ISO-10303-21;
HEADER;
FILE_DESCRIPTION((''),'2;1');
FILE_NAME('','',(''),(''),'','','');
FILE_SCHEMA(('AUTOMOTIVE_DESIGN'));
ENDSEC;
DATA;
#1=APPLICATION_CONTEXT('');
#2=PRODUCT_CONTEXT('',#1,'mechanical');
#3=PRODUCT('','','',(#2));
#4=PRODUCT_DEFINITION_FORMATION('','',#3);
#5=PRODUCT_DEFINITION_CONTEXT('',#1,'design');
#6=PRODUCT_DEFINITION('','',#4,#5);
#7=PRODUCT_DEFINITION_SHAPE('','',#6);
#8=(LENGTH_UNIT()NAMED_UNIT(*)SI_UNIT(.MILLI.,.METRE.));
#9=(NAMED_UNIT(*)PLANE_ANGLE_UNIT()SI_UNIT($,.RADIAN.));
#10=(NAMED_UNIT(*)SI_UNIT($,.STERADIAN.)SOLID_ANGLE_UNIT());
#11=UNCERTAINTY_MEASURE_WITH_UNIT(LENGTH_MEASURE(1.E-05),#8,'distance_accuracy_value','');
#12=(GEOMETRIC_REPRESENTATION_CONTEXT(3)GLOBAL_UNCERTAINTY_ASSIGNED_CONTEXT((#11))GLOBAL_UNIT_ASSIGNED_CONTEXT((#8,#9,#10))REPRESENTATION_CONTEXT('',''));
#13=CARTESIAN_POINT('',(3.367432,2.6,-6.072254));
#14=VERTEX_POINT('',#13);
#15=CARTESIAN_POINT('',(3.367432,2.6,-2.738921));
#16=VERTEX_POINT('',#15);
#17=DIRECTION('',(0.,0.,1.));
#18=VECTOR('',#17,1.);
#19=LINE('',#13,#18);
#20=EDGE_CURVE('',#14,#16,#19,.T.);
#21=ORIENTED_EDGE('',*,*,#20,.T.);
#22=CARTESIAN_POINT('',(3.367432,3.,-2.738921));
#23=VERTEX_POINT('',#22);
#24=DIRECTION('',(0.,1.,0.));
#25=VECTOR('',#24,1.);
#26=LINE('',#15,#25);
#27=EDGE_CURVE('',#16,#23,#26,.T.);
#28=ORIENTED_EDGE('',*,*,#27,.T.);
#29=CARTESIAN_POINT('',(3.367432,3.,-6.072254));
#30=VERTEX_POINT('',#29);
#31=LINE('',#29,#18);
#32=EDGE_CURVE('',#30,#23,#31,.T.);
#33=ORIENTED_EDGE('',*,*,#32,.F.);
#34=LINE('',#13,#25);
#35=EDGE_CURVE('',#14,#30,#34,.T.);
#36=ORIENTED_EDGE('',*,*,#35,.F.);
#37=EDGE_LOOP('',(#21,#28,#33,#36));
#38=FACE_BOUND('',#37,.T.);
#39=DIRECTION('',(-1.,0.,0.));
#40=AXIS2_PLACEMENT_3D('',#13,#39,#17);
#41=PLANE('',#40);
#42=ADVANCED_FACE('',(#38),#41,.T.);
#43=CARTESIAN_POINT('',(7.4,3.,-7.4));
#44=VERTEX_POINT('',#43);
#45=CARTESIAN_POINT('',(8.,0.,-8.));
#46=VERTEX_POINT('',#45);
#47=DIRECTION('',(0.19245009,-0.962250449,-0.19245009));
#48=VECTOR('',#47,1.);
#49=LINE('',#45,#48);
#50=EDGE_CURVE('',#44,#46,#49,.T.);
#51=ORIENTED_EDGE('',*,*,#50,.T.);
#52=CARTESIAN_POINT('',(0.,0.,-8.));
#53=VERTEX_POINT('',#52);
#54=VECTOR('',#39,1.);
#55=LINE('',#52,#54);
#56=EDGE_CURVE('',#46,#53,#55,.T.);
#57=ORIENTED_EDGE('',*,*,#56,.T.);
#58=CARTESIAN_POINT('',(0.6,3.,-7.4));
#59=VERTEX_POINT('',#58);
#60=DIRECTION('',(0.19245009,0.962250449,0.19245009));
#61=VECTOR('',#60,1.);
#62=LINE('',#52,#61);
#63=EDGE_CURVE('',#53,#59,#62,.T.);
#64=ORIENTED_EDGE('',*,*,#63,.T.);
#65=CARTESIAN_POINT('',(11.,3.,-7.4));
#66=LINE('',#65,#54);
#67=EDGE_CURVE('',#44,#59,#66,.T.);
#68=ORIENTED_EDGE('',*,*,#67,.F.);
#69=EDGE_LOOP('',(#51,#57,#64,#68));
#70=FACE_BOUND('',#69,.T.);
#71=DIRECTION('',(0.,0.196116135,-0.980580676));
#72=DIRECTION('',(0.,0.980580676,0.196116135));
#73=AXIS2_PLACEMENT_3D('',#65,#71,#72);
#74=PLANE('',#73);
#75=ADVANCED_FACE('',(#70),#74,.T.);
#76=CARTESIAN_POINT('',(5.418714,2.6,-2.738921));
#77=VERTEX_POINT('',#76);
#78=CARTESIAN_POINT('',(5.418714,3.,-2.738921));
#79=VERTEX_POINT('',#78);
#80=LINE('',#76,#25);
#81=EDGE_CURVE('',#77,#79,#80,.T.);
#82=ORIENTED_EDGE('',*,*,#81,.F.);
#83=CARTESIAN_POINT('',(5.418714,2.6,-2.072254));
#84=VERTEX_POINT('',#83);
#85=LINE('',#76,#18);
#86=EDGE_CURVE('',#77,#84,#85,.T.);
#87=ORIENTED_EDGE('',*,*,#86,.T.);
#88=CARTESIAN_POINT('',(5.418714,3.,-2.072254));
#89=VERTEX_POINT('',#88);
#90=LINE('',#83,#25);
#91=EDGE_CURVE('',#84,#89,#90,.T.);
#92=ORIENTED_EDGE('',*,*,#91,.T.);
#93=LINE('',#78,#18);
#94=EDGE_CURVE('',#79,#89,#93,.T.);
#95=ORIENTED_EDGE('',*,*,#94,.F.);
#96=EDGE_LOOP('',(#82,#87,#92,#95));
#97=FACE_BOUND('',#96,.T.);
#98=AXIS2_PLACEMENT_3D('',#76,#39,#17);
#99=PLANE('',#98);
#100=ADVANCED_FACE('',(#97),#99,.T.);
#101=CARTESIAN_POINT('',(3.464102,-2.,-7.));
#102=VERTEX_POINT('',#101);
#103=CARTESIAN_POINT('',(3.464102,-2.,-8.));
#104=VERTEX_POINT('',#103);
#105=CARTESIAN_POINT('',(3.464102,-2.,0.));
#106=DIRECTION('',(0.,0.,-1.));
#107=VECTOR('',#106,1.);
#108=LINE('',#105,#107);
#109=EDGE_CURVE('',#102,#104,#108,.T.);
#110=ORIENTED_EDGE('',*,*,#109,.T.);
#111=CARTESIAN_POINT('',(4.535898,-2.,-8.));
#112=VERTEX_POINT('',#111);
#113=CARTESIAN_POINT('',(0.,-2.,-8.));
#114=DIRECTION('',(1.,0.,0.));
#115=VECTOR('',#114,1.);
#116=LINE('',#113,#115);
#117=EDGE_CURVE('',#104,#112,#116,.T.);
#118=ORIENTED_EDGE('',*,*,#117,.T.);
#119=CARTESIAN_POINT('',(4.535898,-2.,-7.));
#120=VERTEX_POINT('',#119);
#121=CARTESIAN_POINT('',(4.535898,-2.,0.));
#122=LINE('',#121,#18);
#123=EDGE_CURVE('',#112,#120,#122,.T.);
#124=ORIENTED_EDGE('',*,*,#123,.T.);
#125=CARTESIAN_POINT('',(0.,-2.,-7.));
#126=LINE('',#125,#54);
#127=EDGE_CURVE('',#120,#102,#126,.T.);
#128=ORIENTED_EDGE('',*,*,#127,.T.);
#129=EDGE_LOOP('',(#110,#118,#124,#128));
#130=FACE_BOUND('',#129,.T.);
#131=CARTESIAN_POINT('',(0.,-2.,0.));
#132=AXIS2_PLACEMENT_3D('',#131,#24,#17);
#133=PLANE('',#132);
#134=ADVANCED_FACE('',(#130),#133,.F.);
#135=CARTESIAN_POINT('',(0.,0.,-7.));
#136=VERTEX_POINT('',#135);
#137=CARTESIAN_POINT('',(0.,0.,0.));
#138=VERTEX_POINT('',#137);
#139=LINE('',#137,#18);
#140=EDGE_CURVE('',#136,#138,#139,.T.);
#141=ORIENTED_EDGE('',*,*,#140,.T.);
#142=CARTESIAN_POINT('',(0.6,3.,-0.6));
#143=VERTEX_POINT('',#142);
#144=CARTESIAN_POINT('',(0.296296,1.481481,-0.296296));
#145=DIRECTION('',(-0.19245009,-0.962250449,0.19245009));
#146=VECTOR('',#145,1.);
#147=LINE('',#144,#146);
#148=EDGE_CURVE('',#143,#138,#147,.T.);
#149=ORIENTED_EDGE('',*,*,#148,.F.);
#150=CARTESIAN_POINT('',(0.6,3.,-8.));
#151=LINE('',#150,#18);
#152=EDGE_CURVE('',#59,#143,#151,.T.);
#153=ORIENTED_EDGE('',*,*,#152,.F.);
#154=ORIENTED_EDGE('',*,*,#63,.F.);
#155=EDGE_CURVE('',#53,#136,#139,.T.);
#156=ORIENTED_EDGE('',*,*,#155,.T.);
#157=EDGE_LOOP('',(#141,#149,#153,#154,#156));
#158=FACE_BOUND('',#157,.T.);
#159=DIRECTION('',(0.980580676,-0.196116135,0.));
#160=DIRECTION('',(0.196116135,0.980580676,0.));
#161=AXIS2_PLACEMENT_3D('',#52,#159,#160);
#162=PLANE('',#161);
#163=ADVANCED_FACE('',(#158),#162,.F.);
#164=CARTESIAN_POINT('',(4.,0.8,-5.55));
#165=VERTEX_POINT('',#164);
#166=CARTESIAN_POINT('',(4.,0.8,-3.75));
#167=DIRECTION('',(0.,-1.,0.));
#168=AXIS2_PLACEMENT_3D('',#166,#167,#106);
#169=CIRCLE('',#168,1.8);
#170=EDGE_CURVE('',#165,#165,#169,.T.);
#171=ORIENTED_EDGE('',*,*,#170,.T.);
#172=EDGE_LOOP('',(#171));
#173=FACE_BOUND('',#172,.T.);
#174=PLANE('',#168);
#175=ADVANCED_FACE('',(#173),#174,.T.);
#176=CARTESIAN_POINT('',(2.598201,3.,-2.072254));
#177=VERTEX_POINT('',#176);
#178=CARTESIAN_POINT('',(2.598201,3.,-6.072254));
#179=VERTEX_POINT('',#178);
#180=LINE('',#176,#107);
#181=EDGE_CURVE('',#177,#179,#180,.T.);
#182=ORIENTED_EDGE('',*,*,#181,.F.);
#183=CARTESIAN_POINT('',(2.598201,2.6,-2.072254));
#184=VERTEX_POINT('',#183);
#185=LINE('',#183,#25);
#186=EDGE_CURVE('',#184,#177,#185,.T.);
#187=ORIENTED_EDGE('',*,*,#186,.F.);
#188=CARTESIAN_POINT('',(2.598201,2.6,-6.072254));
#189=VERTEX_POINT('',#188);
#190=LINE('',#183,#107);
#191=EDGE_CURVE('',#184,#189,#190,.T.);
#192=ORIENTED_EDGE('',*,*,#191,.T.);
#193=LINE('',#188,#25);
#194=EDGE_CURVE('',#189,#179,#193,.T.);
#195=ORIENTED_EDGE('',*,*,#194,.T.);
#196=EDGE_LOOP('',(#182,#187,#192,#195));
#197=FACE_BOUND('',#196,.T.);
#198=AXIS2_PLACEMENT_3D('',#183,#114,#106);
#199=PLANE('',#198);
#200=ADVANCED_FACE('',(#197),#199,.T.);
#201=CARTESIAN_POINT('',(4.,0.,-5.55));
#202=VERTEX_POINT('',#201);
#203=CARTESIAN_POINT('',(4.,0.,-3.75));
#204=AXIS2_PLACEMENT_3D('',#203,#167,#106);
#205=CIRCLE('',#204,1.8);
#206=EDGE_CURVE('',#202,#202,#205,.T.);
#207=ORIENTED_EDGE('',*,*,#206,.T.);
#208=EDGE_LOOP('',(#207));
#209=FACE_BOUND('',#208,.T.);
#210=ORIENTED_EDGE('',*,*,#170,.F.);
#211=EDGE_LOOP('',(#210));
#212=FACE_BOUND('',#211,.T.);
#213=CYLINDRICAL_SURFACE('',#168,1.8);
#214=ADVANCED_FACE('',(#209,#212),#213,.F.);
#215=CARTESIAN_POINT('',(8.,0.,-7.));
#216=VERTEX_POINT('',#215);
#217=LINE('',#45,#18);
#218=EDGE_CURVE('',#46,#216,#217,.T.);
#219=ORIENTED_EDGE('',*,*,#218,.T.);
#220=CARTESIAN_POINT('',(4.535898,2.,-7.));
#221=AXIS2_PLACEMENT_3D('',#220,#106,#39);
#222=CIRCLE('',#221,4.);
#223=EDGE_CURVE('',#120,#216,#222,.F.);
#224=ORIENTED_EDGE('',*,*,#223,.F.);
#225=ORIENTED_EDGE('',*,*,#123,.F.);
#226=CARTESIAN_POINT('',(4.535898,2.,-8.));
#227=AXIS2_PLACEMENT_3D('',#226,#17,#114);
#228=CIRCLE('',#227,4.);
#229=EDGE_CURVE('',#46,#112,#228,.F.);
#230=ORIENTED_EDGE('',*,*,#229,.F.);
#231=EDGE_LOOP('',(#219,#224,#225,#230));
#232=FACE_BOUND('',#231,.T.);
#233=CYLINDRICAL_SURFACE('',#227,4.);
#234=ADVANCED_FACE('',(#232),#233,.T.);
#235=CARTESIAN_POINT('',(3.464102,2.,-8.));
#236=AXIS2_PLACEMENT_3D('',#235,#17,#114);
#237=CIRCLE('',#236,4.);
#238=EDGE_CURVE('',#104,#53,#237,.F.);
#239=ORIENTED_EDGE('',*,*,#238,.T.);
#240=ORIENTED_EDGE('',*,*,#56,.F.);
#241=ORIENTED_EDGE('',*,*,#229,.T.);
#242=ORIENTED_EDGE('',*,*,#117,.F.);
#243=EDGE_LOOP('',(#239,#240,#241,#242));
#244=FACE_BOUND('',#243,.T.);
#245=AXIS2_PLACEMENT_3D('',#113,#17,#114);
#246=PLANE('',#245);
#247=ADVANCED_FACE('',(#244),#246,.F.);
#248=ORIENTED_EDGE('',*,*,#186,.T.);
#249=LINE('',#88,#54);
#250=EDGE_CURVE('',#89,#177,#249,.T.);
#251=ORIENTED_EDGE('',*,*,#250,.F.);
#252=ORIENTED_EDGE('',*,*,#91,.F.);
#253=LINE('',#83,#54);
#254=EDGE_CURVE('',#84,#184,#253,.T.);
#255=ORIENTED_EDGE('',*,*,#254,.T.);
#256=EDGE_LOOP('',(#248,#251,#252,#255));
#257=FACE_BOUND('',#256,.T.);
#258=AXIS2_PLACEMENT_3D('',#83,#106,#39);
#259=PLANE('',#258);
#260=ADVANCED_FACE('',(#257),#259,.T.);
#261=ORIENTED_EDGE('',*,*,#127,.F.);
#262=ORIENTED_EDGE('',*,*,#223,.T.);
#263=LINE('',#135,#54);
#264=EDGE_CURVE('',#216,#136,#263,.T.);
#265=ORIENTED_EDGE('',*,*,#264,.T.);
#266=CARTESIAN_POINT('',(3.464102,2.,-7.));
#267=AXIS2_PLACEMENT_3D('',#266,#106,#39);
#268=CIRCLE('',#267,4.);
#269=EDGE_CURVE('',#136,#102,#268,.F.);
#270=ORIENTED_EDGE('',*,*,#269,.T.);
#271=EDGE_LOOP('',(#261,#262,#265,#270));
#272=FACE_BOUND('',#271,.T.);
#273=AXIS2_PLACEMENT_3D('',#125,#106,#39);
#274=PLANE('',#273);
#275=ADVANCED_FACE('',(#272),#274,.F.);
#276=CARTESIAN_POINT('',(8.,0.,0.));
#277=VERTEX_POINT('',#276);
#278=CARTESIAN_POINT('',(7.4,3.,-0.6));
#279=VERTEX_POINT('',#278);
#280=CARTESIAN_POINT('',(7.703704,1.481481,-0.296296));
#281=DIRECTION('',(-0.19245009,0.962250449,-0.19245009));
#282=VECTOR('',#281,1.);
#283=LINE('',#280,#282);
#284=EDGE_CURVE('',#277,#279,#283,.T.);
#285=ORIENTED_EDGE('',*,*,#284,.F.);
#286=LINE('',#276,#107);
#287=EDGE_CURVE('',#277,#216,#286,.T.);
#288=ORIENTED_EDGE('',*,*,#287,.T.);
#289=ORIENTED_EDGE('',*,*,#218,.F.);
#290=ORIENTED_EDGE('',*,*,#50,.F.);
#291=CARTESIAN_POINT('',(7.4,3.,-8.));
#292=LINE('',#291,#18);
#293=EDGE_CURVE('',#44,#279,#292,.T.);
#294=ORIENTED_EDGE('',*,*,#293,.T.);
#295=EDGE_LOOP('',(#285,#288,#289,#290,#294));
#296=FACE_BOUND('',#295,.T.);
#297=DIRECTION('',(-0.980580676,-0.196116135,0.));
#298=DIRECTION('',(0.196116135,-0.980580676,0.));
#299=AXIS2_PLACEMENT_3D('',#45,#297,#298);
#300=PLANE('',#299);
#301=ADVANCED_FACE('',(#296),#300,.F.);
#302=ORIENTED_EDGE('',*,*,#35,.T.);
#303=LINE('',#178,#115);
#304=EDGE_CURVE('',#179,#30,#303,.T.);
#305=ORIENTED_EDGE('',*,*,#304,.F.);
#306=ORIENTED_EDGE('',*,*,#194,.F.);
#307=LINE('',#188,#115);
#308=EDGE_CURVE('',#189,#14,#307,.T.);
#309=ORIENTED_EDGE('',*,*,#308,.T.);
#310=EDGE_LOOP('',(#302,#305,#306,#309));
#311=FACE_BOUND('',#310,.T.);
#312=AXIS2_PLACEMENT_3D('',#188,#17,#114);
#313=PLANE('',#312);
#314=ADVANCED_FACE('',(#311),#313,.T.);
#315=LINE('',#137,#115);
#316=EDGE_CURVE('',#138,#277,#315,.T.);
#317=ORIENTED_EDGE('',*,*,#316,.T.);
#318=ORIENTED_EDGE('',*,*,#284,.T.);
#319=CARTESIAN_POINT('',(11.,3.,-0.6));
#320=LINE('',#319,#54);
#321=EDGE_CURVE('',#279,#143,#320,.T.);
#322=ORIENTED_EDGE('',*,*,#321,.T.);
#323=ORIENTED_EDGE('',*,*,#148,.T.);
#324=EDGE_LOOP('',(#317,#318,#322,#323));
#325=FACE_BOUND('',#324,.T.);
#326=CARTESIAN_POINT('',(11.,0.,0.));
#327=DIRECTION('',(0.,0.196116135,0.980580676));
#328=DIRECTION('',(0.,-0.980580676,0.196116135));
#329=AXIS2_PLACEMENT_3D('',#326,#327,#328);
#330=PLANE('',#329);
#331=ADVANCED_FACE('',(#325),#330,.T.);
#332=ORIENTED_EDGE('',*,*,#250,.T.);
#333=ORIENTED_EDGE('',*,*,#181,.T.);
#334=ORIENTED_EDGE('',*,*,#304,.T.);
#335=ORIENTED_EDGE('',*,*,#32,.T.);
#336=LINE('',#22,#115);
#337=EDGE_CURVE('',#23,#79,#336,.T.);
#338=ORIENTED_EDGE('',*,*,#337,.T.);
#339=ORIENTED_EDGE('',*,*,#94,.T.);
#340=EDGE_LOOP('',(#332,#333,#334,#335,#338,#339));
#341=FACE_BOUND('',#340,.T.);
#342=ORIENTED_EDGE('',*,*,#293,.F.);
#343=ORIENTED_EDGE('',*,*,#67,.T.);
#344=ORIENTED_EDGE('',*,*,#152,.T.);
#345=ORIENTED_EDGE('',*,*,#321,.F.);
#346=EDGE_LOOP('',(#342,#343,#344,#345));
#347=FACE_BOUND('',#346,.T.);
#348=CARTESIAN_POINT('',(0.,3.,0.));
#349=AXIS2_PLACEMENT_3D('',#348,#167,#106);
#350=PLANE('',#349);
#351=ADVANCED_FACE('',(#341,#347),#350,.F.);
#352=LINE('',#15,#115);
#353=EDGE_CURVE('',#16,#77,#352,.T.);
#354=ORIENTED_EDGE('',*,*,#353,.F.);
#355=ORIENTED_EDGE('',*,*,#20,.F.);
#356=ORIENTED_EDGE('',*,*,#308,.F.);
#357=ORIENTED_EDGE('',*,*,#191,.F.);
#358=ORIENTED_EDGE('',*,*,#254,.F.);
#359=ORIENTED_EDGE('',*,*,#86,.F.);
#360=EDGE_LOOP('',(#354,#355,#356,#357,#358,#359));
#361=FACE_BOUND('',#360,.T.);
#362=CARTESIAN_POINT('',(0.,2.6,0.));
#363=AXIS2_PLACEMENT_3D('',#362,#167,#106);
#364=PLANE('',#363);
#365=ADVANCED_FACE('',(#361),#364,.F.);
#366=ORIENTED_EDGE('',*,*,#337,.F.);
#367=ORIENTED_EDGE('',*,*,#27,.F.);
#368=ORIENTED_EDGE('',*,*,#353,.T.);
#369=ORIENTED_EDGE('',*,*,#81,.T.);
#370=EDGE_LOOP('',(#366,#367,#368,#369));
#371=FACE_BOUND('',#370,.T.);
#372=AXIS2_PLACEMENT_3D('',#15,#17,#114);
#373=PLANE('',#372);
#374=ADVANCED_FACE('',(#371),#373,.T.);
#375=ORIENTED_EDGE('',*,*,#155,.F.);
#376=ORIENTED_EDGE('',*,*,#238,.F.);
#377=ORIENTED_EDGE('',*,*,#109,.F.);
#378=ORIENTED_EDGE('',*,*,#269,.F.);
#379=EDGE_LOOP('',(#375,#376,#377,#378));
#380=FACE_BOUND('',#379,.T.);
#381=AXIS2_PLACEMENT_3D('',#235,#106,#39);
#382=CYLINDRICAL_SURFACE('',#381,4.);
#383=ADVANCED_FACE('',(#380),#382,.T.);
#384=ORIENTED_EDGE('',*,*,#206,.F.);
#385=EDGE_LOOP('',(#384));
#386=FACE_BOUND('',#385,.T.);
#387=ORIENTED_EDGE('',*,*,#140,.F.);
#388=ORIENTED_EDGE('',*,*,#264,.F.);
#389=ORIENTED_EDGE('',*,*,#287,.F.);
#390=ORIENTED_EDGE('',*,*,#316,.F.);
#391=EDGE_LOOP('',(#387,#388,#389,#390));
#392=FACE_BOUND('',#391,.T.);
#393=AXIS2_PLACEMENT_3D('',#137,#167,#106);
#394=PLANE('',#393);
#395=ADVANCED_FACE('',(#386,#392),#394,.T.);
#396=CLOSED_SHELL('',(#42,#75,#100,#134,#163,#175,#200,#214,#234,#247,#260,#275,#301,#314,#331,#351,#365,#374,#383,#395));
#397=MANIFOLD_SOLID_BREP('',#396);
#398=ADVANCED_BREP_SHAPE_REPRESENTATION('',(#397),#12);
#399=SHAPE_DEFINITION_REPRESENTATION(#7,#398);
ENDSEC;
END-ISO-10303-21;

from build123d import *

# Parameters (mm, degrees)
SKETCH1_W               = 8
SKETCH1_H               = 8
BOSS_EXTRUDE1_DEPTH     = 3
CUT_EXTRUDE1_DEPTH      = 12.704699911
CUT_EXTRUDE1_DEPTH_BACK = 12.704699911
CUT_EXTRUDE2_DEPTH      = 11
SKETCH4_R               = 1.8
CUT_EXTRUDE3_DEPTH      = 0.8
SKETCH5_W               = 8
SKETCH5_H               = 1
BOSS_EXTRUDE2_DEPTH     = 2
FILLET1_R               = 4
CUT_EXTRUDE4_DEPTH      = 0.4


with BuildPart() as part:
    # Sketch1 → Boss-Extrude1 (new body)
    with BuildSketch(Plane(origin=(0, 0, 0), x_dir=(1, 0, 0), z_dir=(0, 1, 0))):
        with Locations((4, 4)):
            Rectangle(SKETCH1_W, SKETCH1_H)
    extrude(amount=BOSS_EXTRUDE1_DEPTH)

    # Sketch2 → Cut-Extrude1 (cut, two sides: drawn at the far end of the back side and taken through both)
    with BuildSketch(Plane.XY.offset(-CUT_EXTRUDE1_DEPTH_BACK)):
        Polygon((0, 0), (0.6, 3), (0, 3), align=None)
        Polygon((8, 0), (7.4, 3), (8, 3), align=None)
    extrude(amount=CUT_EXTRUDE1_DEPTH + CUT_EXTRUDE1_DEPTH_BACK, mode=Mode.SUBTRACT)

    # Sketch3 → Cut-Extrude2 (cut)
    with BuildSketch(Plane(origin=(0, 0, 0), x_dir=(0, 0, -1), z_dir=(1, 0, 0))):
        Polygon((0, 0), (0.6, 3), (0, 3), align=None)
        Polygon((8, 3), (7.4, 3), (8, 0), align=None)
    extrude(amount=CUT_EXTRUDE2_DEPTH, mode=Mode.SUBTRACT)

    # Sketch4 → Cut-Extrude3 (cut)
    with BuildSketch(Plane.XZ):
        with Locations(Location((4, -3.75, 0), (0, 0, 270))):
            Circle(SKETCH4_R)
    extrude(amount=-CUT_EXTRUDE3_DEPTH, mode=Mode.SUBTRACT)

    # Sketch5 → Boss-Extrude2 (add)
    with BuildSketch(Plane.XZ):
        with Locations((4, -7.5)):
            Rectangle(SKETCH5_W, SKETCH5_H)
    extrude(amount=BOSS_EXTRUDE2_DEPTH)

    # Fillet1
    # the kernel refuses this fillet: 4 mm, written as the material it takes off along each edge
    with BuildSketch(Plane(origin=(8, -2, -16.660254038), x_dir=(0, 1, 0), z_dir=(0, 0, 1)), Plane(origin=(0, -2, 1.660254038), x_dir=(0, 1, 0), z_dir=(0, 0, -1))) as fillet1_piece_1:
        with BuildLine():
            CenterArc((4, 3.464101615), FILLET1_R, 180, 60)
            Line((0, 3.464101615), (-0.08, 3.464101615))
            Line((-0.08, 3.464101615), (-0.08, 0))
            Line((-0.08, 0), (0, -0.08))
            ThreePointArc((0, -0.08), (1, -0.08), (1.96, -0.069282032))
            Line((1.96, -0.069282032), (2, 0))
        make_face()
    extrude(amount=18.320508076, mode=Mode.SUBTRACT)

    # Sketch6 → Cut-Extrude4 (cut)
    with BuildSketch(Plane(origin=(0, 3, 0), x_dir=(1, 0, 0), z_dir=(0, 1, 0))):
        Polygon((2.598201218, 2.07225421), (2.598201218, 6.07225421), (3.367431987, 6.07225421), (3.367431987, 2.738920877), (5.418714038, 2.738920877), (5.418714038, 2.07225421), align=None)
    extrude(amount=-CUT_EXTRUDE4_DEPTH, mode=Mode.SUBTRACT)


solid = part.part
